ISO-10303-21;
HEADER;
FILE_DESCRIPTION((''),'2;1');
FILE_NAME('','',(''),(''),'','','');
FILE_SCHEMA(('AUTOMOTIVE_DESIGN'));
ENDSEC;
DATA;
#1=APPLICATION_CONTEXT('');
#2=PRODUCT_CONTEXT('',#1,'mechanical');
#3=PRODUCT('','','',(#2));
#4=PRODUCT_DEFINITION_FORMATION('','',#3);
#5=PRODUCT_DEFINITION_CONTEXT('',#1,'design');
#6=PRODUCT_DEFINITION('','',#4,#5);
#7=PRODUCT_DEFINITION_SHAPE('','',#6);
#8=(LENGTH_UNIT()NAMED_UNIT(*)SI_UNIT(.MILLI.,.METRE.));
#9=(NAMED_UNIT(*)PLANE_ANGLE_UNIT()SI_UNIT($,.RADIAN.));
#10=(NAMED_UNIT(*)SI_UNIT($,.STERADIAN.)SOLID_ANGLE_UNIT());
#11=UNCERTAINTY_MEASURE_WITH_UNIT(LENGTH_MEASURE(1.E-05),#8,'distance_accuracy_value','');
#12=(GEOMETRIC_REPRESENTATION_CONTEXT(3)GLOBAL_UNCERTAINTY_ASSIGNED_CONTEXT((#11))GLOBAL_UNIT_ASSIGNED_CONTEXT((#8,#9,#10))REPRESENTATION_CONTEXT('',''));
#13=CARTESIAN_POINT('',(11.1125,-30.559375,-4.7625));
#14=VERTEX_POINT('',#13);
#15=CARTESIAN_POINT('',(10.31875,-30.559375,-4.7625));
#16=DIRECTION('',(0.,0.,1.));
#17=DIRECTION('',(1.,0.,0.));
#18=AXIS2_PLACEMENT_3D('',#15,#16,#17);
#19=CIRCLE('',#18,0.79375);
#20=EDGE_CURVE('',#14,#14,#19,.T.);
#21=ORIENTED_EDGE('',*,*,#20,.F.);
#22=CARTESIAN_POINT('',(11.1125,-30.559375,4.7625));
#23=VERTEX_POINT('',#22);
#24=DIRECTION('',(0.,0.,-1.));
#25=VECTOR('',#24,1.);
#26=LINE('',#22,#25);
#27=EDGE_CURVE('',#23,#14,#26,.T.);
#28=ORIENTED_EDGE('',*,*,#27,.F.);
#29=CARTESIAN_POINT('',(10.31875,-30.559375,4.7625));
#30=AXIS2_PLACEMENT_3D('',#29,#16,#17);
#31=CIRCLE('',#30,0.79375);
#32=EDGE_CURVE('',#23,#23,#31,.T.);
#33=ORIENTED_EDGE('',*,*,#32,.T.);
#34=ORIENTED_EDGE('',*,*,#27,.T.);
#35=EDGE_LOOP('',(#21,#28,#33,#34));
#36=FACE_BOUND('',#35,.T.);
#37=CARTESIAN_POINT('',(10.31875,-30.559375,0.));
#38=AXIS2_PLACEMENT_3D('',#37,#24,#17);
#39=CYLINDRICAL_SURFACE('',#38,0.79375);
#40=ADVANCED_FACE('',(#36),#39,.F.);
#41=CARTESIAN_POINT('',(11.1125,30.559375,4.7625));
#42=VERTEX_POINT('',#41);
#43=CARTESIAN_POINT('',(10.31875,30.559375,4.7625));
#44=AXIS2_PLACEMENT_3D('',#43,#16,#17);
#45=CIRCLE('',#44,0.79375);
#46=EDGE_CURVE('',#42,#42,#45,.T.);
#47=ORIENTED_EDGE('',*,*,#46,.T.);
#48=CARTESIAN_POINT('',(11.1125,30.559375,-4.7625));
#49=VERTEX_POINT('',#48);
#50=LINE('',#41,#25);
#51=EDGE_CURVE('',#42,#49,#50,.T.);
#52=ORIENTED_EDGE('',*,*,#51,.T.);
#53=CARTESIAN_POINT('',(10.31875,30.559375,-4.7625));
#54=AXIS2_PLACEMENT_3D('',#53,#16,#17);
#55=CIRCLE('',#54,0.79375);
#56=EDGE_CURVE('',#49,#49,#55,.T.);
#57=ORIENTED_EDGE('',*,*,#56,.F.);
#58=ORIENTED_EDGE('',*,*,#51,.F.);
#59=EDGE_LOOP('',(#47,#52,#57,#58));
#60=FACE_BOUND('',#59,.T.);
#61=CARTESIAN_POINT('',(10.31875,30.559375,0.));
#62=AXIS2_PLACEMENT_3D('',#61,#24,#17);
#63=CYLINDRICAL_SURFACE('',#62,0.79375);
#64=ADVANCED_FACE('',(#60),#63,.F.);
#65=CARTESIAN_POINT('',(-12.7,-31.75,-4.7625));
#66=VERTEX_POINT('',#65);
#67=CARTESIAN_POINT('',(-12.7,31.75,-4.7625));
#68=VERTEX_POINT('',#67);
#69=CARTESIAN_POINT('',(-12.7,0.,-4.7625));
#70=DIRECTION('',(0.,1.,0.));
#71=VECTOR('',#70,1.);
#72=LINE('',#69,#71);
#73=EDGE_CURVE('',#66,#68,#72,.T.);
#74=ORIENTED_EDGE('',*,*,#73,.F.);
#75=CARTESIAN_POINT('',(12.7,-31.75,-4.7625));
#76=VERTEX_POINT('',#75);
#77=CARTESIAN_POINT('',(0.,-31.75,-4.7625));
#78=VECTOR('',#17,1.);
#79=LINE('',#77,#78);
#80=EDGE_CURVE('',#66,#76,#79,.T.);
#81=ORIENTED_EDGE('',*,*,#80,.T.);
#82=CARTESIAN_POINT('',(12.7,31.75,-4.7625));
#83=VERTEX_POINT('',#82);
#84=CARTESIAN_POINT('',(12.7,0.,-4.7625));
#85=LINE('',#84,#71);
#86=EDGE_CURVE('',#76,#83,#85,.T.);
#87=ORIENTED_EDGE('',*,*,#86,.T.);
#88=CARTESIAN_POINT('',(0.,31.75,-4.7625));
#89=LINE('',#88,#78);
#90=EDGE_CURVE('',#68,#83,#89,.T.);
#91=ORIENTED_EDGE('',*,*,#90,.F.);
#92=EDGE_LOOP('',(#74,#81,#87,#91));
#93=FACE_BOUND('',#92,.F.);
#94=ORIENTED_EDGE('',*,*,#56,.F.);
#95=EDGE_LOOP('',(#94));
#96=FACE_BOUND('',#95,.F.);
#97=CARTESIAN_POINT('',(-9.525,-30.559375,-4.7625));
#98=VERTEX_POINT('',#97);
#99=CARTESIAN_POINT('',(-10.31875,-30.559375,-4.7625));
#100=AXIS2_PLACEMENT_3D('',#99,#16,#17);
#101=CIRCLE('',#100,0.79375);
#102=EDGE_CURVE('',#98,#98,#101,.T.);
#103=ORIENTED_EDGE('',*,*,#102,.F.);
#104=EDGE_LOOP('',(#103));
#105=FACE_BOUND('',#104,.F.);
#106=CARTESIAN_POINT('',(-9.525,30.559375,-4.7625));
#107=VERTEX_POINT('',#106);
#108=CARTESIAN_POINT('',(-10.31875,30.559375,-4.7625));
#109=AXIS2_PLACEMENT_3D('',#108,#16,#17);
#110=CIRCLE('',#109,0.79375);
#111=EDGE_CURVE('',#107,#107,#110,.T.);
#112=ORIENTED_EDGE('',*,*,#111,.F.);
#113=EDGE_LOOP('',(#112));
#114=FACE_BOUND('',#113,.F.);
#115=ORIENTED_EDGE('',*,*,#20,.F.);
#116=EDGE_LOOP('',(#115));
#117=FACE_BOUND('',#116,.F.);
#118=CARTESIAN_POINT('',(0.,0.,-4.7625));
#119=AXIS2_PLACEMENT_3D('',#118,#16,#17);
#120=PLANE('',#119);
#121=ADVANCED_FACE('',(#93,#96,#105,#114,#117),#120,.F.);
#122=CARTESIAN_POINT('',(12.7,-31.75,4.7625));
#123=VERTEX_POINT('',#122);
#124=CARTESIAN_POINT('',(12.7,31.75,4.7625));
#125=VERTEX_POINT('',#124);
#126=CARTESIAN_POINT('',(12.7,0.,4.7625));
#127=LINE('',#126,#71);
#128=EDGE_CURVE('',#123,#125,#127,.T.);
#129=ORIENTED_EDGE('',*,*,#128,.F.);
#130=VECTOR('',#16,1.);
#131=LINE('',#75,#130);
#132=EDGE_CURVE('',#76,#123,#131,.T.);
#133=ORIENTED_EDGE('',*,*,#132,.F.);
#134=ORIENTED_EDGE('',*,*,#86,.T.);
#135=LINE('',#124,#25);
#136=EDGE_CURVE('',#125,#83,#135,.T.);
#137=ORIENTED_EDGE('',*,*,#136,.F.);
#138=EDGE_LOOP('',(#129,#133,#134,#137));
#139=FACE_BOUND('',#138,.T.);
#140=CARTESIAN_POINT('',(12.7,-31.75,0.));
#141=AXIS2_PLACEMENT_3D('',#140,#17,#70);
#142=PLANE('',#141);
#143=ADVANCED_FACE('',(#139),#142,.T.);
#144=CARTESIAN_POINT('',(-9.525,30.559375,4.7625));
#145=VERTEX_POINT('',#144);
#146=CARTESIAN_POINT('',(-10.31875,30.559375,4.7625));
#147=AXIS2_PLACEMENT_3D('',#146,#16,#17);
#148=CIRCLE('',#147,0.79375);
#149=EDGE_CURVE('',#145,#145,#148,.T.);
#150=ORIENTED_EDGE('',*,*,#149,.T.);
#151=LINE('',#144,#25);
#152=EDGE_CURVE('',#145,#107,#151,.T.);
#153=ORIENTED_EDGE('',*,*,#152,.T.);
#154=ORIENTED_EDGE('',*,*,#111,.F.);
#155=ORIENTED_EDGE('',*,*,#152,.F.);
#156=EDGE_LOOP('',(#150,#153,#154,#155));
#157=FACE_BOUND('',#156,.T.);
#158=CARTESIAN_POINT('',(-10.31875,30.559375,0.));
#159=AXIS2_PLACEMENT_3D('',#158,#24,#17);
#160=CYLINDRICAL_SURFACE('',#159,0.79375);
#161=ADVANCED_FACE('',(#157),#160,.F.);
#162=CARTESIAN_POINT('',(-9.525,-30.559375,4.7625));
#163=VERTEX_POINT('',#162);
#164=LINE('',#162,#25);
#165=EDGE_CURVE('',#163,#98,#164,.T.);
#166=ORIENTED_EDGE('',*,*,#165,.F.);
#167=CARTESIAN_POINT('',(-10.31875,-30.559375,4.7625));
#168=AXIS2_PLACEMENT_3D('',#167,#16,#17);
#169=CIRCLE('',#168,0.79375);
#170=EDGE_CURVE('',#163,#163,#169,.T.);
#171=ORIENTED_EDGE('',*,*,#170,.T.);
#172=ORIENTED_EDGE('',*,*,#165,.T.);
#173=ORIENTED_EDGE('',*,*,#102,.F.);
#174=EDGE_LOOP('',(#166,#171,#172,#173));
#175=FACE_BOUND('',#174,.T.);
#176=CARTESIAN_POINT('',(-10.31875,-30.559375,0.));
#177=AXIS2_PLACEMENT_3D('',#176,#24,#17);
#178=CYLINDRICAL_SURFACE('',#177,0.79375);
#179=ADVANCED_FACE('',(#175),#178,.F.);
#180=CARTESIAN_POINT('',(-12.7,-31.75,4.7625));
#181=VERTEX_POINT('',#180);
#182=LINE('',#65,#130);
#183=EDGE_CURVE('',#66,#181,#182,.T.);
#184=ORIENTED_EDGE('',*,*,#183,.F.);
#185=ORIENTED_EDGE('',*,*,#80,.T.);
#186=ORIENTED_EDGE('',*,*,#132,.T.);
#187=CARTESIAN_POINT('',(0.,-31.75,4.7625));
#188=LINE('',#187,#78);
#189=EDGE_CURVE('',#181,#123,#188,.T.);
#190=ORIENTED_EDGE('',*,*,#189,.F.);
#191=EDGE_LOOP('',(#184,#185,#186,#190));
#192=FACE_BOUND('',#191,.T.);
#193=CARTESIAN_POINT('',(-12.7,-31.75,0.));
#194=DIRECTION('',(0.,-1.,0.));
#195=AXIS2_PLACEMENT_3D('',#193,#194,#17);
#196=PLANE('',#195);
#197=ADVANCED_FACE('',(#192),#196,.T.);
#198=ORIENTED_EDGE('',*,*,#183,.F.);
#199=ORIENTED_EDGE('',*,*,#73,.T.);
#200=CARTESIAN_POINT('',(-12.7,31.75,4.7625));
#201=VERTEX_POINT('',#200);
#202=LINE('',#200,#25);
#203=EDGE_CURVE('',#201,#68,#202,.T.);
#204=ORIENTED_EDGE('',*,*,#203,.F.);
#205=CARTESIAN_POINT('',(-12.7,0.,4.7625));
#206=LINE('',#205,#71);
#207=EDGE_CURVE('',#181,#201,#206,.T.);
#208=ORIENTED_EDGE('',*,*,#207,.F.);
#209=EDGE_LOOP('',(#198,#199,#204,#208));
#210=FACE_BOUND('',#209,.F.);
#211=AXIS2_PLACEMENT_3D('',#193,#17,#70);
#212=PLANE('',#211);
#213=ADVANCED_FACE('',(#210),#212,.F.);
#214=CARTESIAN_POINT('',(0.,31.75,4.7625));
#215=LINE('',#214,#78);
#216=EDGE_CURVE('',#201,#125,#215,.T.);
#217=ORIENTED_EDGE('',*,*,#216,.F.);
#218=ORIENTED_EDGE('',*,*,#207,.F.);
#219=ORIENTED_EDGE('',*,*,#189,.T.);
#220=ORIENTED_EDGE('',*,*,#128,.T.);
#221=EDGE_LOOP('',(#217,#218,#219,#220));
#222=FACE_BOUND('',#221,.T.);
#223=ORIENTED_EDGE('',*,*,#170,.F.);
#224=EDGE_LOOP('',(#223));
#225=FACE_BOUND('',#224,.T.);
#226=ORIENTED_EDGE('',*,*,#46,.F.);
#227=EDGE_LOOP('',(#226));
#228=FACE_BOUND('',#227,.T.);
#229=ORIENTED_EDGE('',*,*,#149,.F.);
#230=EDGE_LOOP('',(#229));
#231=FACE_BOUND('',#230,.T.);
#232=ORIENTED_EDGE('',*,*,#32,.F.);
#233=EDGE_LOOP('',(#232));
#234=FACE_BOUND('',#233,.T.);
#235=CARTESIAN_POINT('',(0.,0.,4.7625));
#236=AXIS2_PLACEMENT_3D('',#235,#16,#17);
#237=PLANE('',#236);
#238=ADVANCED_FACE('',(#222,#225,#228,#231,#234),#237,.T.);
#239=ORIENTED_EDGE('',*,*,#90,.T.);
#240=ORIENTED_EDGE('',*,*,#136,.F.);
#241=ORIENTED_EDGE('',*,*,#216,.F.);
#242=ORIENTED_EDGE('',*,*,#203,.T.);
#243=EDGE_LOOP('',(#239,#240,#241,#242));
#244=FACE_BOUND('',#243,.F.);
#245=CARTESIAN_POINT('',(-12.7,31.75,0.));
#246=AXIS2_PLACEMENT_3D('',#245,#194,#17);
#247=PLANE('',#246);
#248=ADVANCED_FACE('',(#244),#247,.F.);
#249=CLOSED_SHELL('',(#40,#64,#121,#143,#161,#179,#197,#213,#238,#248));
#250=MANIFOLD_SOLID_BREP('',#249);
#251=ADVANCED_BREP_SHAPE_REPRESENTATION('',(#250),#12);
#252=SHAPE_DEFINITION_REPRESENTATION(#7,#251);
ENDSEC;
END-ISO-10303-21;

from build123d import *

# Parameters (mm, degrees)
F0_W     = 25.4
F0_H     = 63.5
F0_R     = 0.79375
F1_DEPTH = 4.7625


# Not quite as in the source:
# - a length typed as a fraction of an inch, garbled in the dataset ("3 / 203.2 mm" for 3/8 in), is restored


with BuildPart() as f1:
    # F0 (on Top) → F1 (new body, symmetric)
    with BuildSketch(Plane.XY):
        Rectangle(F0_W, F0_H)
        with Locations((-10.31875, -30.559375)):
            Circle(F0_R, mode=Mode.SUBTRACT)
        with Locations((10.31875, -30.559375)):
            Circle(F0_R, mode=Mode.SUBTRACT)
        with Locations((-10.31875, 30.559375)):
            Circle(F0_R, mode=Mode.SUBTRACT)
        with Locations((10.31875, 30.559375)):
            Circle(F0_R, mode=Mode.SUBTRACT)
    extrude(amount=F1_DEPTH, both=True)


solid = f1.part
